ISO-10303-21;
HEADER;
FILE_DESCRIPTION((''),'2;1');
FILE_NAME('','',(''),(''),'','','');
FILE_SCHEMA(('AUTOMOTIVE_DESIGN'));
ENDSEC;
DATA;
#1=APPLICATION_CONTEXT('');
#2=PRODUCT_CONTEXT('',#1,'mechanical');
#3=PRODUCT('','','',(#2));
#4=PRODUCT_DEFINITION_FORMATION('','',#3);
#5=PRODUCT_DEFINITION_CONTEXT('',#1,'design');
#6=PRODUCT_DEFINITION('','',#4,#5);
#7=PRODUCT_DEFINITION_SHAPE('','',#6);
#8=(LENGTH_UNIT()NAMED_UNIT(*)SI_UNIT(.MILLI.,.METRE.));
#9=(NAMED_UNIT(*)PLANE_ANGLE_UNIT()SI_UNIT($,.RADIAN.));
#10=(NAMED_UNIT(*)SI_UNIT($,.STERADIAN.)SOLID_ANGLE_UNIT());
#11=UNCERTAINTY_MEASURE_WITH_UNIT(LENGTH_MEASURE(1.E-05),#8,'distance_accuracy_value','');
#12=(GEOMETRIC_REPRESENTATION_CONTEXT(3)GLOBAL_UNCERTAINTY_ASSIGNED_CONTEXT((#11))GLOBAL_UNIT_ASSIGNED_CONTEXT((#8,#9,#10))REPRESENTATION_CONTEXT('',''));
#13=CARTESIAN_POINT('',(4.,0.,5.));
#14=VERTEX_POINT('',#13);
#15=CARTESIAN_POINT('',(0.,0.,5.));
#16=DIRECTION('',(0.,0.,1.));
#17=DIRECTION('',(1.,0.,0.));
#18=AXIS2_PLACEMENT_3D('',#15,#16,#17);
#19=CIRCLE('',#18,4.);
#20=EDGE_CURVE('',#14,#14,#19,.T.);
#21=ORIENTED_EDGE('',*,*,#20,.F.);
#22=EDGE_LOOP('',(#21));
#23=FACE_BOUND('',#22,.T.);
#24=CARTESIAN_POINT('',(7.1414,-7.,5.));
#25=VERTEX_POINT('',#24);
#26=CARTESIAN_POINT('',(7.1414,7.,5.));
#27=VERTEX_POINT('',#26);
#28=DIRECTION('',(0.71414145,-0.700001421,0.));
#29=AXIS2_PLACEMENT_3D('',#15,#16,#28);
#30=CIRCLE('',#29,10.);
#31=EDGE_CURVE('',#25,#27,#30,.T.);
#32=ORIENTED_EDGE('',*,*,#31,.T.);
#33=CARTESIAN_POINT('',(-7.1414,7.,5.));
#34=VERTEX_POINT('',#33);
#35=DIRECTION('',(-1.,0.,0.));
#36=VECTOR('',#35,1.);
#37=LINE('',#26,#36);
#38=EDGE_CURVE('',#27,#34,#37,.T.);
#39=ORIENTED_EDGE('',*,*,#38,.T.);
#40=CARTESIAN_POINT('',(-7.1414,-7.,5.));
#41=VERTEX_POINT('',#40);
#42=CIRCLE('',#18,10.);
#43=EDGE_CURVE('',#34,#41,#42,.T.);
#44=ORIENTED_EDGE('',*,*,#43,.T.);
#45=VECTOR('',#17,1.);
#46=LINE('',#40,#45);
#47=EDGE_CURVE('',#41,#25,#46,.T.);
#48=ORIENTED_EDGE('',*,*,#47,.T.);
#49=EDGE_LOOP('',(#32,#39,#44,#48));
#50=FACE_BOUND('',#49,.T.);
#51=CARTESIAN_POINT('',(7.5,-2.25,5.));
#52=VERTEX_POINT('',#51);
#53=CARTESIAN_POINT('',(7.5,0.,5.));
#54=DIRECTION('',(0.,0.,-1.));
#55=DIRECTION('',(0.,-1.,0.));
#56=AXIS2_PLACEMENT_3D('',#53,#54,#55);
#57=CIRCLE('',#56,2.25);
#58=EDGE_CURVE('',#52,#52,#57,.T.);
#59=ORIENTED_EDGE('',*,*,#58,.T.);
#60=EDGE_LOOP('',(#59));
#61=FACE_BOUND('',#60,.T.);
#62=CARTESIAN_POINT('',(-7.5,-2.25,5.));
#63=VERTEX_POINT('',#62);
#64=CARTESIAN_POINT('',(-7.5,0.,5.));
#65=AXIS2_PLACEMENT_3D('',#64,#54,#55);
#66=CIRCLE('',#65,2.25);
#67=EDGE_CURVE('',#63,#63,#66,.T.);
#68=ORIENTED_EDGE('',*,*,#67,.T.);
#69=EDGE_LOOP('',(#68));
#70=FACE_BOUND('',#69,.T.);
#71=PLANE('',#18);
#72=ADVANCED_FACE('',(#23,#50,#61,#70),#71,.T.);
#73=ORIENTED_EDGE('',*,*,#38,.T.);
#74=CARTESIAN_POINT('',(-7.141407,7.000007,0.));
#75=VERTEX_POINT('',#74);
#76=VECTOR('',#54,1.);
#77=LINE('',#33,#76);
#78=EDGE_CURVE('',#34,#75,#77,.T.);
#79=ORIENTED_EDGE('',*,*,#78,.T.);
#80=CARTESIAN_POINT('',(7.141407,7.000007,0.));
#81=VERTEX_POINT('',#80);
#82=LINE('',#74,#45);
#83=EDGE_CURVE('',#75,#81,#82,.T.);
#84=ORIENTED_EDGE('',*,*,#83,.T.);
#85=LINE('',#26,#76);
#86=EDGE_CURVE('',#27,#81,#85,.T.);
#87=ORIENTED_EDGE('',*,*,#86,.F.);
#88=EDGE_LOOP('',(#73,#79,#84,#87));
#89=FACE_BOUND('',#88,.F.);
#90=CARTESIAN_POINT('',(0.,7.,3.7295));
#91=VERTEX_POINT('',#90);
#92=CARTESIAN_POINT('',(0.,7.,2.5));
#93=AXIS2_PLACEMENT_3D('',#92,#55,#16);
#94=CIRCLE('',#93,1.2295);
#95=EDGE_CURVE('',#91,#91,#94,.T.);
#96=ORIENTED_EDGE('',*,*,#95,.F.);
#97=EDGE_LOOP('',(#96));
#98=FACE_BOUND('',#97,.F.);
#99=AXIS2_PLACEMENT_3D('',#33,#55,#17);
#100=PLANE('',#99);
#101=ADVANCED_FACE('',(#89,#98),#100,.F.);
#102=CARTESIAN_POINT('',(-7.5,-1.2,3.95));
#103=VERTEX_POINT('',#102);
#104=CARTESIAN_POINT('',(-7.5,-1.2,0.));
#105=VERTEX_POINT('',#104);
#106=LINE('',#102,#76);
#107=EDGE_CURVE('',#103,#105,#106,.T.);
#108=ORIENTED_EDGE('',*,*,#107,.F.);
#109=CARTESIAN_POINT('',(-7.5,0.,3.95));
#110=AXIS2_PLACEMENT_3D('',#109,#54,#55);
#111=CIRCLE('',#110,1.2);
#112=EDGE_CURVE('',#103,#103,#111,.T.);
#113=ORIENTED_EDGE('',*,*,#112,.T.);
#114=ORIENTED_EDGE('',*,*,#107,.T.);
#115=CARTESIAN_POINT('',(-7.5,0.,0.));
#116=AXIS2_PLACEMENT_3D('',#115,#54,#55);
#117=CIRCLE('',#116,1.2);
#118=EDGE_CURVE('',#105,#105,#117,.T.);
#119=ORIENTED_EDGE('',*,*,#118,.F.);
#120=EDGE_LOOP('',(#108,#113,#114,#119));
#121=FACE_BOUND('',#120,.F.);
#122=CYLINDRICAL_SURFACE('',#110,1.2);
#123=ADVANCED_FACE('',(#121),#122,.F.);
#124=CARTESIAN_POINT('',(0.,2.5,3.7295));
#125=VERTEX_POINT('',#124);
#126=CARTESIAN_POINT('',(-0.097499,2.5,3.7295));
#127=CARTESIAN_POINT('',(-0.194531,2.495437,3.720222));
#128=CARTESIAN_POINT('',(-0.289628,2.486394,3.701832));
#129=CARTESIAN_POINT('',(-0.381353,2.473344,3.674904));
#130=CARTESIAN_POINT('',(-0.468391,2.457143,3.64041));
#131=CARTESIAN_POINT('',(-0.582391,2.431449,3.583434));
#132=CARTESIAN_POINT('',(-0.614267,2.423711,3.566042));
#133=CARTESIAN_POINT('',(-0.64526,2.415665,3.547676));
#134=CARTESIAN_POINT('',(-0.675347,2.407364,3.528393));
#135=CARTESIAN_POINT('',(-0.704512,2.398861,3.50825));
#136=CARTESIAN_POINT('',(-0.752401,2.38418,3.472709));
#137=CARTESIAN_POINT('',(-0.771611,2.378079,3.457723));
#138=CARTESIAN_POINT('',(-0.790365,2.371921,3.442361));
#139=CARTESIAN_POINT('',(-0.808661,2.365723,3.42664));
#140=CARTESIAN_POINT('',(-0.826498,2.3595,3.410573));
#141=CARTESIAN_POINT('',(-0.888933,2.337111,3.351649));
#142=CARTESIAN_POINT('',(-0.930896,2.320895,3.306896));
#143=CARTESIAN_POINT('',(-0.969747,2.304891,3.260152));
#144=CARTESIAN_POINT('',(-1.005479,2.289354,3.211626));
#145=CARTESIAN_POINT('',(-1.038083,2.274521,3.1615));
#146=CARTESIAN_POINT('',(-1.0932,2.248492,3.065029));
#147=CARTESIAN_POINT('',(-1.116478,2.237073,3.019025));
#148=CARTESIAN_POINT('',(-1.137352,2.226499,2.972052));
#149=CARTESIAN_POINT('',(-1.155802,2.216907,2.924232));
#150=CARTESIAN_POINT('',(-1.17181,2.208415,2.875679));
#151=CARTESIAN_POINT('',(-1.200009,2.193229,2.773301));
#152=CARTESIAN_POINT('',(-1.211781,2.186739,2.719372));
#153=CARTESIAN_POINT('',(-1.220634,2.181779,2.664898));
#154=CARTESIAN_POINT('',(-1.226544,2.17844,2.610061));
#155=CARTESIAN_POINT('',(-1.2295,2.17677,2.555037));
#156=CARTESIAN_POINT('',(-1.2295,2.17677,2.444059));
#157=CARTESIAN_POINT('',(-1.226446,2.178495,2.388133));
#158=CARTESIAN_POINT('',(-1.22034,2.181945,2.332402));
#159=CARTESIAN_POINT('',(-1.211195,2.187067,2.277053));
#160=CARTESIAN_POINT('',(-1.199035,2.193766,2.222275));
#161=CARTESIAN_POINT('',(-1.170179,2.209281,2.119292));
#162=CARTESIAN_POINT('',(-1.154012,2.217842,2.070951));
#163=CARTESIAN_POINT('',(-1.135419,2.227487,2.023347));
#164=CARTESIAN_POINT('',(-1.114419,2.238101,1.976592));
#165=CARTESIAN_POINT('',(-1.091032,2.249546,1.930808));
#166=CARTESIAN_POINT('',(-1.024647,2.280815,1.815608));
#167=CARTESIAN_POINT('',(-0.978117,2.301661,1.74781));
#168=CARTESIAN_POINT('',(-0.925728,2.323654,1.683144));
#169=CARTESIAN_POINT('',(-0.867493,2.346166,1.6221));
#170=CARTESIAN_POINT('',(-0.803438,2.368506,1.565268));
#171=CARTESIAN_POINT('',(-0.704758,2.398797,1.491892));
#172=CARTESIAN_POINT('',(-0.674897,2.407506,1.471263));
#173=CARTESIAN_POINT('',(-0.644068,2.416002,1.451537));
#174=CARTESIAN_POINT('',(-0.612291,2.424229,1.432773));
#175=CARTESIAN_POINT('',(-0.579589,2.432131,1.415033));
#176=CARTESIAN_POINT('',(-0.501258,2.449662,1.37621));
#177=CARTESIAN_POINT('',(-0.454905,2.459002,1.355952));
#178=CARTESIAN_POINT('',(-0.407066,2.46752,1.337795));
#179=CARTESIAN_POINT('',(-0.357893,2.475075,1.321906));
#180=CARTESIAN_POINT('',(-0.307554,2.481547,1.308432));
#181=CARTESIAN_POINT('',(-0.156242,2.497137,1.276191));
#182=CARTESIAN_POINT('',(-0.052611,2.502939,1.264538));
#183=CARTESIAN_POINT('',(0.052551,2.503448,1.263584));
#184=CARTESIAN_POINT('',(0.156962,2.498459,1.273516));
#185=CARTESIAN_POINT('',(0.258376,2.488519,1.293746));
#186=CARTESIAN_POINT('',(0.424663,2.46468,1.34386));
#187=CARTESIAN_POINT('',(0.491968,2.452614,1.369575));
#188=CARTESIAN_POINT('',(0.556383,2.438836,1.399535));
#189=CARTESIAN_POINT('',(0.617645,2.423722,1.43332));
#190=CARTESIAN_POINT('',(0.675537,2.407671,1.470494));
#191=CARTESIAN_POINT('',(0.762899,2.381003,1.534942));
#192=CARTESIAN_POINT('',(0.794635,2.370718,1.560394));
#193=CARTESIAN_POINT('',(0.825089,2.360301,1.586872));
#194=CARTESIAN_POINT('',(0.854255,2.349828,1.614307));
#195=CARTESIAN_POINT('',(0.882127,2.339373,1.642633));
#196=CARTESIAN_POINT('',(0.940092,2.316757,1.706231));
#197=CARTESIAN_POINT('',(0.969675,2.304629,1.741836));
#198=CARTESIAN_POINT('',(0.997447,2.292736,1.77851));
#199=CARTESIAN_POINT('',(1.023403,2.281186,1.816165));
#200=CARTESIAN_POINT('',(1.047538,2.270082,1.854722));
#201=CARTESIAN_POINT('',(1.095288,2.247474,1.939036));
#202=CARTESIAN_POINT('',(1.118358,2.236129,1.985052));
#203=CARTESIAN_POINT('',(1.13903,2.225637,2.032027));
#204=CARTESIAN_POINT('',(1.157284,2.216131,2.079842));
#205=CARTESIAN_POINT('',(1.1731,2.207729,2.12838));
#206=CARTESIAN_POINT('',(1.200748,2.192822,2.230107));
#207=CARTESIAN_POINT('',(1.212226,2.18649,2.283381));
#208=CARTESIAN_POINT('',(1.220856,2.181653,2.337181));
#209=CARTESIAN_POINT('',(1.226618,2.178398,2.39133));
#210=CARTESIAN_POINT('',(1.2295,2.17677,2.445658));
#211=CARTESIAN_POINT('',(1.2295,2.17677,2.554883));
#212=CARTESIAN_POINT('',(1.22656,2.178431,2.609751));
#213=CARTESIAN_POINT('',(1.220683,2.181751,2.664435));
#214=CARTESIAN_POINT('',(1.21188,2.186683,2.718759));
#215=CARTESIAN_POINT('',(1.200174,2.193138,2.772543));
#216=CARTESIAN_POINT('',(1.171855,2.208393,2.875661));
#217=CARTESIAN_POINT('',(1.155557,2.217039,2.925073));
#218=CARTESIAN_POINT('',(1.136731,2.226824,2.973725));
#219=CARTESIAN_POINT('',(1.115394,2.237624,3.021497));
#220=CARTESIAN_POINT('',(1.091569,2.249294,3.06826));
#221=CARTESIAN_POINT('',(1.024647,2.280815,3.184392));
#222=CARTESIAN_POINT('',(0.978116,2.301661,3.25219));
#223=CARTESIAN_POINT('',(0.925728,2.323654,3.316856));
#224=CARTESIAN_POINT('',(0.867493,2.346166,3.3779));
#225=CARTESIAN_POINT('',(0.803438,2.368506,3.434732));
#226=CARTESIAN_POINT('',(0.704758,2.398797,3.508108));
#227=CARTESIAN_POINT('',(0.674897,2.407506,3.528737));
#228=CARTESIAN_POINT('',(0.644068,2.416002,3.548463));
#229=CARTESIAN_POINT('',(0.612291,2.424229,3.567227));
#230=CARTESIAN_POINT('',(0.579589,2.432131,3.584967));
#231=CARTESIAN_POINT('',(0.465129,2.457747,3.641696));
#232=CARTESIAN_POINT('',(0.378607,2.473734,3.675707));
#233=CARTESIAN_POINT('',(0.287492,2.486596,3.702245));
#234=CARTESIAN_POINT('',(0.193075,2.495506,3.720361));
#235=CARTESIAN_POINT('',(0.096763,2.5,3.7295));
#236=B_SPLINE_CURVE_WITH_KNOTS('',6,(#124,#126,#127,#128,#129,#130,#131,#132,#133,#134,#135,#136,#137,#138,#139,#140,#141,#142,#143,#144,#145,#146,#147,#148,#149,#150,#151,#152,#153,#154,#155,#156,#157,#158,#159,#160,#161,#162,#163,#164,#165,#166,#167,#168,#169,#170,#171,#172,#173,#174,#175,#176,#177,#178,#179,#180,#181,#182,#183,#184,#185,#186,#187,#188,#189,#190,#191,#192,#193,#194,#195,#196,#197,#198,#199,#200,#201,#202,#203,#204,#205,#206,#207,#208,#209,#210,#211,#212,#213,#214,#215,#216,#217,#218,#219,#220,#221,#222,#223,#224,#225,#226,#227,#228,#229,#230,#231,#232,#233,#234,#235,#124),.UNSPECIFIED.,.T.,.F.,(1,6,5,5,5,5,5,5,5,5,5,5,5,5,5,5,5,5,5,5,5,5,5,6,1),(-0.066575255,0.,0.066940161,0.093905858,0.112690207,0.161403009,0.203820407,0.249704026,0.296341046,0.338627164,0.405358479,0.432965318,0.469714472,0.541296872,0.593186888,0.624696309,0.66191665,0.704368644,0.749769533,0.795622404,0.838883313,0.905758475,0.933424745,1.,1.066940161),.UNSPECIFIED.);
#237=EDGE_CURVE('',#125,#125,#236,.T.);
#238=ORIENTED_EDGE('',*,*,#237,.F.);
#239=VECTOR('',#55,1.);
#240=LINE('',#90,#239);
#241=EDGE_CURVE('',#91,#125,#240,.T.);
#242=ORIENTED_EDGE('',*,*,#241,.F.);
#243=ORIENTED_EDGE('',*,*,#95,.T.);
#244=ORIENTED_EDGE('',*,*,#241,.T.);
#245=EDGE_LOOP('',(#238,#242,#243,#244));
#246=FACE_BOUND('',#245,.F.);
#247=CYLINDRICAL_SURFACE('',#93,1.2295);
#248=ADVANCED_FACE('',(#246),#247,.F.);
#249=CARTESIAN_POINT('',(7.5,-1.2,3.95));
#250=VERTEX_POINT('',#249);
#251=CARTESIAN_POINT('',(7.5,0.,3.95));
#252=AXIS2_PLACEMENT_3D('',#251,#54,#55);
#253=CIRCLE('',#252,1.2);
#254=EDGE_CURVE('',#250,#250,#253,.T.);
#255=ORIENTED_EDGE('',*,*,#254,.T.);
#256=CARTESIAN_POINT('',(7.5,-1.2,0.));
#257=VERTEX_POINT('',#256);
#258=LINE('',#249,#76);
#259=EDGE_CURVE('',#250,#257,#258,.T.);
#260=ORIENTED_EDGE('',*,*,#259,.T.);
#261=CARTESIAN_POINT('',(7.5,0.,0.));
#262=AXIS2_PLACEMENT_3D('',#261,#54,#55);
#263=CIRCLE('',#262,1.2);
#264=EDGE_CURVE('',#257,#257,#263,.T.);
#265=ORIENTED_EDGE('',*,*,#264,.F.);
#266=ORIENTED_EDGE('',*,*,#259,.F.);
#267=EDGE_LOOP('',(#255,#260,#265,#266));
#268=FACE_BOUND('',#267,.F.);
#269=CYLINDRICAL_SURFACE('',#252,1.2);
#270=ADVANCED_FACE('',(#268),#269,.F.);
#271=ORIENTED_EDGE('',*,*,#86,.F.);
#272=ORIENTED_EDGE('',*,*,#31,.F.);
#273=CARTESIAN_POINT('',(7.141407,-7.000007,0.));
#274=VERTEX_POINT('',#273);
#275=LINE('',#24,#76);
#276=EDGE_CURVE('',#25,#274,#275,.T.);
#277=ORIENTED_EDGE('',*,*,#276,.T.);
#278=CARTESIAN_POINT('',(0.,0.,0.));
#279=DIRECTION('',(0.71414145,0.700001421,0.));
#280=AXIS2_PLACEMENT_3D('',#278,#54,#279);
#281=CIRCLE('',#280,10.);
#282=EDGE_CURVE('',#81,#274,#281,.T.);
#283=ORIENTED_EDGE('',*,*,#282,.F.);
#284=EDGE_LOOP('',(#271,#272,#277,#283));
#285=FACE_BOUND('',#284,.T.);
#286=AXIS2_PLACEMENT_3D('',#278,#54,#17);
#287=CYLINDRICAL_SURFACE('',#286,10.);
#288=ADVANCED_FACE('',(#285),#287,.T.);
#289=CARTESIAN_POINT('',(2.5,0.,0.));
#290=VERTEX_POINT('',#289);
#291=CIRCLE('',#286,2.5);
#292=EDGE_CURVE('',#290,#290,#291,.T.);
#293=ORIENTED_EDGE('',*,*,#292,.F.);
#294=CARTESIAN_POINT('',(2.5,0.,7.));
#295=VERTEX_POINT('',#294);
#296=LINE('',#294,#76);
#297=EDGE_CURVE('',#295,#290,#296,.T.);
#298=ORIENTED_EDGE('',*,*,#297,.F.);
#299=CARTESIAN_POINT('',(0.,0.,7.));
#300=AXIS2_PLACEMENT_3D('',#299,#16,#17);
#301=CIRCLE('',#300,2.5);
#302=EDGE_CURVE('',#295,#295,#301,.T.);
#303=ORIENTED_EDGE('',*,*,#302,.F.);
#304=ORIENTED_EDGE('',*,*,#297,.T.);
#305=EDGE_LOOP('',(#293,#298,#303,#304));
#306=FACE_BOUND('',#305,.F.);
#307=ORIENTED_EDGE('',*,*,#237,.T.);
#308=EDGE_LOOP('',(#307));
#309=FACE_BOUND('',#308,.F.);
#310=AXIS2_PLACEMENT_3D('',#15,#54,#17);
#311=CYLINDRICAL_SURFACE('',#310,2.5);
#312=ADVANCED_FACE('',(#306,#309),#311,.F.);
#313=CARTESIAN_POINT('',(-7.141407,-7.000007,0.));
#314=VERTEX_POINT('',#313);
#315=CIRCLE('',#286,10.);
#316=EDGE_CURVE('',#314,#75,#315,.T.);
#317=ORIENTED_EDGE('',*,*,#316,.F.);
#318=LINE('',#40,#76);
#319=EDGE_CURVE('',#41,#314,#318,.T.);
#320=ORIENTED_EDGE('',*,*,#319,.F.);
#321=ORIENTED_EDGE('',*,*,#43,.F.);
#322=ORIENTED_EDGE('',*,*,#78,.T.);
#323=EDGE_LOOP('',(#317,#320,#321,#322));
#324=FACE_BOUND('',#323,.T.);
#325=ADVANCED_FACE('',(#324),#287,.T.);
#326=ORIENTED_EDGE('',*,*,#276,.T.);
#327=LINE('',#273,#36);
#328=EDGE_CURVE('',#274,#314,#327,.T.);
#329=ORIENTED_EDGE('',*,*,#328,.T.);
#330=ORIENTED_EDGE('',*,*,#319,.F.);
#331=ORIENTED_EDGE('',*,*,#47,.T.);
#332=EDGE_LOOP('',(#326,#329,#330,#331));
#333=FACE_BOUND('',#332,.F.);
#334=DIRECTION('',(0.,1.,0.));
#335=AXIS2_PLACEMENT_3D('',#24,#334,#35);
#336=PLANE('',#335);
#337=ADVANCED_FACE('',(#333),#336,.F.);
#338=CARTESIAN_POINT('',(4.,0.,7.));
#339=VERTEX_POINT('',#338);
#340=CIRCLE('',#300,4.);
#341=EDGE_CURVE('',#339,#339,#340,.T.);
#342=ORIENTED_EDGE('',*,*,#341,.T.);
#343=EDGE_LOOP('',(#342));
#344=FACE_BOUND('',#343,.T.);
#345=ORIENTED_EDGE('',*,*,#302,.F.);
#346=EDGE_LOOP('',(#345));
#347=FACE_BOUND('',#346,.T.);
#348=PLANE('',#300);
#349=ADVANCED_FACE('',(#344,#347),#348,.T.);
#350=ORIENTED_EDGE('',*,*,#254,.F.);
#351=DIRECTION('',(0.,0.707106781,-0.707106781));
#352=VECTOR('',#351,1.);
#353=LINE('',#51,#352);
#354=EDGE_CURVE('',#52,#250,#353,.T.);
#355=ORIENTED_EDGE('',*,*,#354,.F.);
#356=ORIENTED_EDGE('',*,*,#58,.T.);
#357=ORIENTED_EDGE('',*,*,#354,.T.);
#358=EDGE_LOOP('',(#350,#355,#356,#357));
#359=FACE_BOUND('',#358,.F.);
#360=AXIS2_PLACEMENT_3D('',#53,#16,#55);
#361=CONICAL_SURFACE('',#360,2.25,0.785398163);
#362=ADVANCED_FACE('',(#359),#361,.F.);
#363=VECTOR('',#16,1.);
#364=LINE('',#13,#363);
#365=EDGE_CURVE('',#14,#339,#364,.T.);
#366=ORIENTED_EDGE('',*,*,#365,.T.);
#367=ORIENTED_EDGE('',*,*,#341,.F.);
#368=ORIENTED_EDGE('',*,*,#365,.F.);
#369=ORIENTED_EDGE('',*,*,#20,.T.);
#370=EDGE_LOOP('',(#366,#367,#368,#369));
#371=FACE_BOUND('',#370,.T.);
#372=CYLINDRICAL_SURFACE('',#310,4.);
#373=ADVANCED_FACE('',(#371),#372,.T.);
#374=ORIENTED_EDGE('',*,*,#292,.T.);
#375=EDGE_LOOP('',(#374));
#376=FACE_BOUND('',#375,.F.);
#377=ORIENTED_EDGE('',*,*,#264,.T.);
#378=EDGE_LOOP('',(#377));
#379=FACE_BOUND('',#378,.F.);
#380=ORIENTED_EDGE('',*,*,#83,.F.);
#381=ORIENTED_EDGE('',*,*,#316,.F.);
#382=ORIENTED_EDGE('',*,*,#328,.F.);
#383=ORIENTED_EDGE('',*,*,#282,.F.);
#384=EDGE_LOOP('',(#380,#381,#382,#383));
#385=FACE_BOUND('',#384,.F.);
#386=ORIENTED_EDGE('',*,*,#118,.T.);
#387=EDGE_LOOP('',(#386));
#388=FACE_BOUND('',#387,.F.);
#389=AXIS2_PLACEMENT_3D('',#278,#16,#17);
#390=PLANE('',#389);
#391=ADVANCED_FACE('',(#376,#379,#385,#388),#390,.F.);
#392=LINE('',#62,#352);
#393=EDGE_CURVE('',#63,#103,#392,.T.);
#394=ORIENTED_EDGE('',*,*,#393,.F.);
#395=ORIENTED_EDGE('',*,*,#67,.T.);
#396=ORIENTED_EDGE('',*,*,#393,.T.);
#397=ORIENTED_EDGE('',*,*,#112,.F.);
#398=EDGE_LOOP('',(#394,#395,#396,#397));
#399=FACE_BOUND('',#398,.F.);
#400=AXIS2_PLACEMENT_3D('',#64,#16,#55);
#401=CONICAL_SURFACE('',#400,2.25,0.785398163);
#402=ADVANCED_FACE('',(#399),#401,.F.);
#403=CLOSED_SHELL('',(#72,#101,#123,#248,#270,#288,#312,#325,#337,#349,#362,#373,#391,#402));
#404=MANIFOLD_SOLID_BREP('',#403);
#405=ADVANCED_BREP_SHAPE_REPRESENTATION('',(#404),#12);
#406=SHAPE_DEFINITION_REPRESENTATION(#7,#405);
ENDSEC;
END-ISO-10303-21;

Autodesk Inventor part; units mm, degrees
ref_plane "YZ Plane" through (0, 0, 0) normal (1, 0, 0) x (0, 1, 0)
ref_plane "XZ Plane" through (0, 0, 0) normal (0, 1, 0) x (-1, 0, 0)
ref_plane "XY Plane" through (0, 0, 0) normal (0, 0, 1) x (1, 0, 0)
sketch "Skizze1" plane through (0, 0, 0) normal (0, 0, 1) x (1, 0, 0)
  line L0 (-14, 0) -> (14, 0) projected
  line L1 (0, -14) -> (0, 14) projected
  circle A0 centre (0, 0) radius 10
  circle A1 centre (0, 0) radius 2.5
  dimension "d0" = 5
  dimension "d1" = 20
extrude "Extrusion1" add sketch "Skizze1" along normal blind 5 contours A1 L1 A0 L0 | L0 A0 L1 A1 | A1 L0 A0 L1 | L1 A0 L0 A1
sketch "Skizze2" plane through (0, 0, 5) normal (0, 0, 1) x (1, 0, 0)
  circle A0 centre (0, 0) radius 10 projected
  line L0 (-14, 0) -> (14, 0) projected
  line L1 (0, -14) -> (0, 14) projected
  line L2 (-7.1414, 7) -> (7.1414, 7)
  line L3 (7.1414, -7) -> (-7.1414, -7)
  dimension "d4" = 14
extrude "Extrusion2" cut sketch "Skizze2" against normal through all contours L2 L1 A0 | A0 L1 L3 | L1 L2 A0 | A0 L3 L1
sketch "Skizze3" plane through (-7.1414, 7, 5) normal (0, 1, 0) x (1, 0, 0)
  line L0 (0, 5) -> (14.2829, 5) projected
  line L1 (-6.8586, 5) -> (21.1414, 5) projected
  line L2 (7.1414, 6) -> (7.1414, -1) projected
  point P0 (7.1414, 5)
  point P1 (7.1414, 2.5)
  dimension "d7" = 2.5
hole "Bohrung1" at (0, 7, 2.5) direction (0, -1, 0) diameter 2.459 end up to surface thread size "M3x0.5" class "6H" standard "ISO Metric profile"
sketch "Skizze4" plane through (0, 0, 5) normal (0, 0, 1) x (1, 0, 0)
  circle A0 centre (0, 0) radius 2.5 projected
  line L0 (-14, 0) -> (14, 0) projected
  line L1 (0, -14) -> (0, 14) projected
  circle A1 centre (0, 0) radius 7.5
  point P0 (-7.5, 0)
  point P1 (7.5, 0)
  dimension "d15" = 15
hole "Bohrung2" at (-7.5, 0, 5) at (7.5, 0, 5) direction (0, 0, -1) diameter 2.4 end through all countersink diameter 4.5 countersink angle 90
sketch "Skizze5" plane through (0, 0, 5) normal (0, 0, 1) x (1, 0, 0)
  circle A0 centre (0, 0) radius 2.5 projected
  circle A1 centre (0, 0) radius 4
  dimension "d23" = 8
extrude "Extrusion3" add sketch "Skizze5" along normal blind 2
properties part number "13_1087_028"
